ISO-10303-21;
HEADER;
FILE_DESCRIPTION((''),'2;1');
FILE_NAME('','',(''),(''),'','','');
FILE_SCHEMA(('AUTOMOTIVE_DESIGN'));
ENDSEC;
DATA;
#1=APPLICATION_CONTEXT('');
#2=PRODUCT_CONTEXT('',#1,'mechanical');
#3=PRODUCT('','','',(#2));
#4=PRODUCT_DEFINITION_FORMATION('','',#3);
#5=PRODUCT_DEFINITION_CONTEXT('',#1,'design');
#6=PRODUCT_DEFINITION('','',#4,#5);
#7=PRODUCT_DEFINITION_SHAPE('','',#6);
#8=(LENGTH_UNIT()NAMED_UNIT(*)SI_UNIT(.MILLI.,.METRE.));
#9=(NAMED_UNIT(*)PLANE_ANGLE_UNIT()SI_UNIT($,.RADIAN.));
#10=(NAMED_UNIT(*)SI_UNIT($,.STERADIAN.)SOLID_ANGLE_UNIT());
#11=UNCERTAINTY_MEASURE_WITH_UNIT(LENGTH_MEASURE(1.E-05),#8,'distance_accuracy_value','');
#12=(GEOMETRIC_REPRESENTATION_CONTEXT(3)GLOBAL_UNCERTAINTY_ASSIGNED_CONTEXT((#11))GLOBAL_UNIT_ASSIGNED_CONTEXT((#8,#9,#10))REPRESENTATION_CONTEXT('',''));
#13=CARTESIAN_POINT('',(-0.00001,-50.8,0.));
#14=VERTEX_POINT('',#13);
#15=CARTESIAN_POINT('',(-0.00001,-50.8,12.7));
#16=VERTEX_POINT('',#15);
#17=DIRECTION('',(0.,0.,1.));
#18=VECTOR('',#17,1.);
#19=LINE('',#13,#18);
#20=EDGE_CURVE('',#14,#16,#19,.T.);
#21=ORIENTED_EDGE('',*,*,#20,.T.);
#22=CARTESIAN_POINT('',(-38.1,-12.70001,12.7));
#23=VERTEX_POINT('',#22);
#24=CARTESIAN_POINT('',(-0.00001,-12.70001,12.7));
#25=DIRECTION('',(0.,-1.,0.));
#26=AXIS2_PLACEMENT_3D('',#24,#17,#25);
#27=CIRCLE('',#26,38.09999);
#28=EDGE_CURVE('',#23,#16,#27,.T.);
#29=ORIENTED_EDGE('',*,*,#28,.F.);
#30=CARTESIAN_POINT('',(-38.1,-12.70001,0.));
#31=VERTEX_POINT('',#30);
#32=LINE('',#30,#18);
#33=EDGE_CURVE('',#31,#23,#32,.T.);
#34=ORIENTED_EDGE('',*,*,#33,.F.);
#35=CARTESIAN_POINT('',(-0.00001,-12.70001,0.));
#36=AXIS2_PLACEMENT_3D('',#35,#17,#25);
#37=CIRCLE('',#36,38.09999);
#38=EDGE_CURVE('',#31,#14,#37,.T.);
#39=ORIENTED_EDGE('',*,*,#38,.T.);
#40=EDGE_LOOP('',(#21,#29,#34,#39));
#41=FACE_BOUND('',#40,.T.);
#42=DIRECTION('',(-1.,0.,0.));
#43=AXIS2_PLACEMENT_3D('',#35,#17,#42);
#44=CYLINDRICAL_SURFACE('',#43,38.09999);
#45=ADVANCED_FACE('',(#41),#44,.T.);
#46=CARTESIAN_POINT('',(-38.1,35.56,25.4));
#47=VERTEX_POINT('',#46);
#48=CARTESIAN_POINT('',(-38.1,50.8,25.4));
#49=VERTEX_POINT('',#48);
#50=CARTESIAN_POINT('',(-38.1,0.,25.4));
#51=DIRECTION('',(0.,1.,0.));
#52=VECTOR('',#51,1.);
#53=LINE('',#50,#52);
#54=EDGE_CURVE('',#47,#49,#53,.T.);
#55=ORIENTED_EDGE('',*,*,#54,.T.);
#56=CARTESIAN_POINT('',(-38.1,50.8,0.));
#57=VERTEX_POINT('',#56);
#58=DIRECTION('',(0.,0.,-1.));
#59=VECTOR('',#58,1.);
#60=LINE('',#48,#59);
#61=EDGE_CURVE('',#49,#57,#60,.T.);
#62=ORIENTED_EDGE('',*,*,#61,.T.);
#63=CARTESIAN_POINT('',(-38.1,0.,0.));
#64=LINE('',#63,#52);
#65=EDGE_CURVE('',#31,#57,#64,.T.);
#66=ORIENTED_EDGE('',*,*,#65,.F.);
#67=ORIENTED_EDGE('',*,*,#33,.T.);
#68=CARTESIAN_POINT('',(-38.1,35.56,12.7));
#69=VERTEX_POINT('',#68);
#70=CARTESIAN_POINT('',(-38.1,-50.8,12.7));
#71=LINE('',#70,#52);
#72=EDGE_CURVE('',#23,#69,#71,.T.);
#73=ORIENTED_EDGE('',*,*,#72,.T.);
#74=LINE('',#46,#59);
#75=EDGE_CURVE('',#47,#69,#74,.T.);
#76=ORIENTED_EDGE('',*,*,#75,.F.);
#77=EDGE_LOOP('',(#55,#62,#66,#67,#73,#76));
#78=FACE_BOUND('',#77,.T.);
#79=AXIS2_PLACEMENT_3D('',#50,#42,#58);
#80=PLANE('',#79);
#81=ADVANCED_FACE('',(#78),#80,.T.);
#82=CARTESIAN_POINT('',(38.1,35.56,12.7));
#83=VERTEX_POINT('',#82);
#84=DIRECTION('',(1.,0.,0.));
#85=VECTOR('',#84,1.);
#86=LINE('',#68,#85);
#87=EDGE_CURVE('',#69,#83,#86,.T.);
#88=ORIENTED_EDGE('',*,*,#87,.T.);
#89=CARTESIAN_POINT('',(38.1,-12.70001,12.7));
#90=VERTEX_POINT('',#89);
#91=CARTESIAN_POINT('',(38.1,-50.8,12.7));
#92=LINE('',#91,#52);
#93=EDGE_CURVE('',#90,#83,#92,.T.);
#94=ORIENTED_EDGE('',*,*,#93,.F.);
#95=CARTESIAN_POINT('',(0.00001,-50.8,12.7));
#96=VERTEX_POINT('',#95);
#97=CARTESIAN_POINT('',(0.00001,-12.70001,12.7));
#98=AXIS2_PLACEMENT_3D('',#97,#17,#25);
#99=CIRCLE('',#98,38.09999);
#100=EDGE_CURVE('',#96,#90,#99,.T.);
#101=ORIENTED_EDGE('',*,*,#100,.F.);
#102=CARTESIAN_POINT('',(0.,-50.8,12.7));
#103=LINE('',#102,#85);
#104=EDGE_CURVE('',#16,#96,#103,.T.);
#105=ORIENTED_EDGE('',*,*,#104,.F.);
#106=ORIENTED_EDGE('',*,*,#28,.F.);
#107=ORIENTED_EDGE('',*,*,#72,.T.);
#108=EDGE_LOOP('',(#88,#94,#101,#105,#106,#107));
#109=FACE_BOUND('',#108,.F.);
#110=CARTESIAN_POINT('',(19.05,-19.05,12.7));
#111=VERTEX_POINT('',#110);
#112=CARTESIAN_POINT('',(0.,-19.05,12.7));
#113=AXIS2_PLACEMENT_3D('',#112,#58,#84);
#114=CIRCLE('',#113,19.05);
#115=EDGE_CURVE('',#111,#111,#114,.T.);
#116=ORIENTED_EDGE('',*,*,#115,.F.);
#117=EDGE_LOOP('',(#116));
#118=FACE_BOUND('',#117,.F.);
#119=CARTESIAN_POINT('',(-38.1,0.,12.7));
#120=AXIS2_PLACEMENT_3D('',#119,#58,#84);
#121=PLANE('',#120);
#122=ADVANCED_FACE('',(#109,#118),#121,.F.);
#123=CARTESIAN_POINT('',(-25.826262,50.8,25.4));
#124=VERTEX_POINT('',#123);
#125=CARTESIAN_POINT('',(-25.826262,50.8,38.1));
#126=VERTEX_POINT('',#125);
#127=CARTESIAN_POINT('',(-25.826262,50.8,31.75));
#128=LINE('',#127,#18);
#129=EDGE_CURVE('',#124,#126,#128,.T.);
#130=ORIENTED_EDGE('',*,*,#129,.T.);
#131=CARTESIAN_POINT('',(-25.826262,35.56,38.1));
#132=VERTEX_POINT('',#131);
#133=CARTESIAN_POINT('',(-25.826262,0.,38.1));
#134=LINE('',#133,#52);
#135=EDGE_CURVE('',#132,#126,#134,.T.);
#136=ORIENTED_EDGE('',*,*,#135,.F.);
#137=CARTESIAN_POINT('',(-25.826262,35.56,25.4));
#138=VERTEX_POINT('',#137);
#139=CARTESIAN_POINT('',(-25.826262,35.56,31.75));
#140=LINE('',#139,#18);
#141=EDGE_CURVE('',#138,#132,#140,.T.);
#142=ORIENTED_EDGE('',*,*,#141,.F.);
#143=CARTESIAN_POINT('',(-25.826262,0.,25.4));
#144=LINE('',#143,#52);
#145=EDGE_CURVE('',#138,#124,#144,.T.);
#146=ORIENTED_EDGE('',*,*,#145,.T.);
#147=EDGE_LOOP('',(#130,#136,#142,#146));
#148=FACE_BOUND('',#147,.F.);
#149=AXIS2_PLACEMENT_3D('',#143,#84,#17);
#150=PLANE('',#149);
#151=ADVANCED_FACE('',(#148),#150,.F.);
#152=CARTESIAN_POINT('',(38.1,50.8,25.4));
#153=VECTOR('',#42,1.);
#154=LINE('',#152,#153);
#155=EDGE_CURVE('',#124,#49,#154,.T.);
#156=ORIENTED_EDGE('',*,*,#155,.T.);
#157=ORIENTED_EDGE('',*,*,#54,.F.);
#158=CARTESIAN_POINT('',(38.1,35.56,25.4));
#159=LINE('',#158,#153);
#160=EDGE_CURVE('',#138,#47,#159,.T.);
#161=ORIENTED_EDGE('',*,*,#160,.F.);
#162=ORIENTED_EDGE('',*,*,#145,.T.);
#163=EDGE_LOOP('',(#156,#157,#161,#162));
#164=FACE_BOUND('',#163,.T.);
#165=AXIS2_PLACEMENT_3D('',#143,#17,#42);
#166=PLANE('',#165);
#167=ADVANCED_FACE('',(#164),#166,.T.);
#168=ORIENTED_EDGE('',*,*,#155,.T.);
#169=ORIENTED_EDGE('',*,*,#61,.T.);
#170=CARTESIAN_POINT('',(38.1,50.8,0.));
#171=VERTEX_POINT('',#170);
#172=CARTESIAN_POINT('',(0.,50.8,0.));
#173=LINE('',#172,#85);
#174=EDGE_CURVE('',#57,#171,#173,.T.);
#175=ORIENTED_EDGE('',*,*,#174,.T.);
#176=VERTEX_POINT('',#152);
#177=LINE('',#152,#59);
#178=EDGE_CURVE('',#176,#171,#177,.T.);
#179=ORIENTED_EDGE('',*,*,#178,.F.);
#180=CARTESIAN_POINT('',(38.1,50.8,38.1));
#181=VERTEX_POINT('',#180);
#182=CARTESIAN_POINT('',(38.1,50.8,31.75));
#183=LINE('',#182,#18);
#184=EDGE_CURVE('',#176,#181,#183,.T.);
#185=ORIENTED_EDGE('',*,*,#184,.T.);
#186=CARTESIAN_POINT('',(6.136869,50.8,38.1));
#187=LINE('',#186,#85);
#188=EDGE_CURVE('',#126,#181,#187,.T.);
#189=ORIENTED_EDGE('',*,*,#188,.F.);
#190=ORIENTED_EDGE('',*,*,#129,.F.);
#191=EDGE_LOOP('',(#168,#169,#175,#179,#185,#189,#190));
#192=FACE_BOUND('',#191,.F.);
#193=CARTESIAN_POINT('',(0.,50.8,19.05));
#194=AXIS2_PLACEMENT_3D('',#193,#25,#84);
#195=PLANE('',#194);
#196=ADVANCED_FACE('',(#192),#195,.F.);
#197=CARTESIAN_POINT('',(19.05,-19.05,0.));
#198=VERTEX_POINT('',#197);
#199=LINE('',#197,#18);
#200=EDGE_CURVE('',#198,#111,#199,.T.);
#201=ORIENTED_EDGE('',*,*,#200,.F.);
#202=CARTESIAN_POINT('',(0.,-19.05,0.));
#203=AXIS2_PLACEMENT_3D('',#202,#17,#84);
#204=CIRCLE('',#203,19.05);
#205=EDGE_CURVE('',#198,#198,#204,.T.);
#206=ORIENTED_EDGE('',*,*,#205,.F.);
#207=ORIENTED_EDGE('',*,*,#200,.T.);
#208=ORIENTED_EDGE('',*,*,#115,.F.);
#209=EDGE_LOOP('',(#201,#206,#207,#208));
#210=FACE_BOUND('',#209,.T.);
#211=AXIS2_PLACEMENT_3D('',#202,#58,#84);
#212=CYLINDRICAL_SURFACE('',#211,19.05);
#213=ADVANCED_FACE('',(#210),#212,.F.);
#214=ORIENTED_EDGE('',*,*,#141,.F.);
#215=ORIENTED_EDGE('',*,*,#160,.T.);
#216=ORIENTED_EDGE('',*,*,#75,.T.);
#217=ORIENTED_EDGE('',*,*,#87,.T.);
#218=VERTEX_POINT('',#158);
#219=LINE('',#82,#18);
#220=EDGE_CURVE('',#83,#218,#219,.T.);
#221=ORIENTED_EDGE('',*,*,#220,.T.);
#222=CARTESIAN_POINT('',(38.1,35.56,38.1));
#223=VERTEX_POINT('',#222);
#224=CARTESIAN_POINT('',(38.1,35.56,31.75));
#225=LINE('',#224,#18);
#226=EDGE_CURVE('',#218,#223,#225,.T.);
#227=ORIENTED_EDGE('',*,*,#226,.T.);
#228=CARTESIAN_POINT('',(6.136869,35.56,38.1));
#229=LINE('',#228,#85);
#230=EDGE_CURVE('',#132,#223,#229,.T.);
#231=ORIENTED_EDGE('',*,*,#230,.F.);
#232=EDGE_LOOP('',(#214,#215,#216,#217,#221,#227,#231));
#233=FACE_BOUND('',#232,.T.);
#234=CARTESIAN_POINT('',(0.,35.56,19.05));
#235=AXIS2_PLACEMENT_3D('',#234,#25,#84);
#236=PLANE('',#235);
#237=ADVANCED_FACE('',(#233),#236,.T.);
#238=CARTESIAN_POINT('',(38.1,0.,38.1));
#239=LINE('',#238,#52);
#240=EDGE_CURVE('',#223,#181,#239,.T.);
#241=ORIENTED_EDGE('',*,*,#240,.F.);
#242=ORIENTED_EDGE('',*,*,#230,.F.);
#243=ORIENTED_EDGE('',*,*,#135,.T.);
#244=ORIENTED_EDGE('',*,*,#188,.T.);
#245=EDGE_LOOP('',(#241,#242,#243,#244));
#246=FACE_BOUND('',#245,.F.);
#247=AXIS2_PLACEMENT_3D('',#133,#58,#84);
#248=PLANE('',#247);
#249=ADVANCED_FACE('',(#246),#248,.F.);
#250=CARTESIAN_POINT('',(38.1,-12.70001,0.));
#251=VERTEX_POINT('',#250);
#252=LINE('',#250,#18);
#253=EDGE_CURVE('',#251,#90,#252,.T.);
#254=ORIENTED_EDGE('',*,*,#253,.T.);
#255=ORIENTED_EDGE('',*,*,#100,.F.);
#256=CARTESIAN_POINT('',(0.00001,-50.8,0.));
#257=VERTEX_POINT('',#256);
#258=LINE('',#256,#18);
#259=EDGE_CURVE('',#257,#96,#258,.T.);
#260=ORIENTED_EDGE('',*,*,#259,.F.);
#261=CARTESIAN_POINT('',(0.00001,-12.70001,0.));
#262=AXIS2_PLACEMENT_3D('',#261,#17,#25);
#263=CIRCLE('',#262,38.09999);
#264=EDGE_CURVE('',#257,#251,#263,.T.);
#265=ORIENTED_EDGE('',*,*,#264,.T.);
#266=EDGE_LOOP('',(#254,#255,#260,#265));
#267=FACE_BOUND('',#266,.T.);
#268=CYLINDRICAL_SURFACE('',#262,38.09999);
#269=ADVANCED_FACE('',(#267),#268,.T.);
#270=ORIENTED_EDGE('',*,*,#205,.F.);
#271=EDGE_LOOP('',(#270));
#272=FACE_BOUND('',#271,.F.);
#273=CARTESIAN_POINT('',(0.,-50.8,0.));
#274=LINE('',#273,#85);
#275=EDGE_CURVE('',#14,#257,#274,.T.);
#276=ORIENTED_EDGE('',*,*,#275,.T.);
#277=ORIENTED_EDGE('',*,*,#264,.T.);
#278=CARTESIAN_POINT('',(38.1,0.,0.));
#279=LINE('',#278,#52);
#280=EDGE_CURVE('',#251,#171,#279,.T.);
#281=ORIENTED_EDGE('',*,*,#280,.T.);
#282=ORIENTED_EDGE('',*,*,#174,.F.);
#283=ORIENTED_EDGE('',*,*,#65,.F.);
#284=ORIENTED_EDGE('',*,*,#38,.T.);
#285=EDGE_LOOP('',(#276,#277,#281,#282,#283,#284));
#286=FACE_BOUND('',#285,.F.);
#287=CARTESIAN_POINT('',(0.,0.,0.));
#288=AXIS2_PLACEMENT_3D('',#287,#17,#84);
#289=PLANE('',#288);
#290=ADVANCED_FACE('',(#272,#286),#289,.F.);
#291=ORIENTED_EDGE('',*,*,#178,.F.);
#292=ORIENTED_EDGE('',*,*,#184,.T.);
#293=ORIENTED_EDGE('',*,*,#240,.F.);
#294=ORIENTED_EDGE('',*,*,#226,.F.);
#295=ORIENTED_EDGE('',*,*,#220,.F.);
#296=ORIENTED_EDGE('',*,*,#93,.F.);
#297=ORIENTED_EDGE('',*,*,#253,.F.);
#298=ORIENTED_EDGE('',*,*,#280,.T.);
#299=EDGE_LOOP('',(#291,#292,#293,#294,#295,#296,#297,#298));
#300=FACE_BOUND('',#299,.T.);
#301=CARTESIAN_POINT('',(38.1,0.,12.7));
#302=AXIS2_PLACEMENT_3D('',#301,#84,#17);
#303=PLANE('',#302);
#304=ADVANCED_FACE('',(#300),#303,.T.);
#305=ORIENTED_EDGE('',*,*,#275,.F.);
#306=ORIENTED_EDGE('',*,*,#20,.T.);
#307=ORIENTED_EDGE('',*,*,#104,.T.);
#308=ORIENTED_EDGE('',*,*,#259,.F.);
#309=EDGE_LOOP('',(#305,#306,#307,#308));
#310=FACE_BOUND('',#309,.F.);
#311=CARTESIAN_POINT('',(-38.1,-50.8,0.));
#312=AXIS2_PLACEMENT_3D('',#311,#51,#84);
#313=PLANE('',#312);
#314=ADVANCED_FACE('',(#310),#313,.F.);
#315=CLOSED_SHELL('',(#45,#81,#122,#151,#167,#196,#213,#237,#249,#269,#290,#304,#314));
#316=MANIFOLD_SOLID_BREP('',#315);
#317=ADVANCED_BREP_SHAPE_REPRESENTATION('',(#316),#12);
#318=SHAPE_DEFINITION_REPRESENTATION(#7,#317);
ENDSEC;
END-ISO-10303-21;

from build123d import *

# Parameters (mm, degrees)
F0_W     = 76.2
F0_H     = 101.6
F1_DEPTH = 12.7
F2_W     = 63.9262623101
F2_H     = 12.7
F3_DEPTH = 50.8
F4_DEPTH = 35.56
F5_R     = 19.05
F6_DEPTH = 38.101
F7_R     = 38.09999


# Not quite as in the source:
# - a fillet or chamfer is up to 0.001 mm smaller than in the source, because OpenCascade refuses the exact size


with BuildPart() as f1:
    # F0 (on Top) → F1 (new body)
    with BuildSketch(Plane.XY):
        Rectangle(F0_W, F0_H)
    extrude(amount=F1_DEPTH)

    # F2 (on Front) → F3 (join)
    with BuildSketch(Plane.XZ):
        Polygon((-25.8262623101, 25.4), (-38.1, 25.4), (-38.1, 12.7), (38.1, 12.7), (38.1, 25.4), align=None)
        with Locations((6.1368688449, 31.75)):
            Rectangle(F2_W, F2_H)
    extrude(amount=-F3_DEPTH)

    # F4 (cut): a face of the model
    f4_faces = [f1.faces().sort_by_distance(p)[0] for p in [
        (2.7996685352, 0, 24.8437999484),
    ]]
    extrude(f4_faces, amount=-F4_DEPTH, mode=Mode.SUBTRACT)

    # F5 (on Top) → F6 (cut, through all)
    with BuildSketch(Plane.XY):
        with Locations((0, -19.05)):
            Circle(F5_R)
    extrude(amount=F6_DEPTH, mode=Mode.SUBTRACT)

    # F7 (radius 38.1 in the source; OpenCascade refuses exactly that, so slightly less here)
    f7_edges = [f1.edges().sort_by_distance(p)[0] for p in [
        (-38.1, -50.8, 6.35),
        (38.1, -50.8, 6.35),
    ]]
    fillet(f7_edges, radius=F7_R)


solid = f1.part
